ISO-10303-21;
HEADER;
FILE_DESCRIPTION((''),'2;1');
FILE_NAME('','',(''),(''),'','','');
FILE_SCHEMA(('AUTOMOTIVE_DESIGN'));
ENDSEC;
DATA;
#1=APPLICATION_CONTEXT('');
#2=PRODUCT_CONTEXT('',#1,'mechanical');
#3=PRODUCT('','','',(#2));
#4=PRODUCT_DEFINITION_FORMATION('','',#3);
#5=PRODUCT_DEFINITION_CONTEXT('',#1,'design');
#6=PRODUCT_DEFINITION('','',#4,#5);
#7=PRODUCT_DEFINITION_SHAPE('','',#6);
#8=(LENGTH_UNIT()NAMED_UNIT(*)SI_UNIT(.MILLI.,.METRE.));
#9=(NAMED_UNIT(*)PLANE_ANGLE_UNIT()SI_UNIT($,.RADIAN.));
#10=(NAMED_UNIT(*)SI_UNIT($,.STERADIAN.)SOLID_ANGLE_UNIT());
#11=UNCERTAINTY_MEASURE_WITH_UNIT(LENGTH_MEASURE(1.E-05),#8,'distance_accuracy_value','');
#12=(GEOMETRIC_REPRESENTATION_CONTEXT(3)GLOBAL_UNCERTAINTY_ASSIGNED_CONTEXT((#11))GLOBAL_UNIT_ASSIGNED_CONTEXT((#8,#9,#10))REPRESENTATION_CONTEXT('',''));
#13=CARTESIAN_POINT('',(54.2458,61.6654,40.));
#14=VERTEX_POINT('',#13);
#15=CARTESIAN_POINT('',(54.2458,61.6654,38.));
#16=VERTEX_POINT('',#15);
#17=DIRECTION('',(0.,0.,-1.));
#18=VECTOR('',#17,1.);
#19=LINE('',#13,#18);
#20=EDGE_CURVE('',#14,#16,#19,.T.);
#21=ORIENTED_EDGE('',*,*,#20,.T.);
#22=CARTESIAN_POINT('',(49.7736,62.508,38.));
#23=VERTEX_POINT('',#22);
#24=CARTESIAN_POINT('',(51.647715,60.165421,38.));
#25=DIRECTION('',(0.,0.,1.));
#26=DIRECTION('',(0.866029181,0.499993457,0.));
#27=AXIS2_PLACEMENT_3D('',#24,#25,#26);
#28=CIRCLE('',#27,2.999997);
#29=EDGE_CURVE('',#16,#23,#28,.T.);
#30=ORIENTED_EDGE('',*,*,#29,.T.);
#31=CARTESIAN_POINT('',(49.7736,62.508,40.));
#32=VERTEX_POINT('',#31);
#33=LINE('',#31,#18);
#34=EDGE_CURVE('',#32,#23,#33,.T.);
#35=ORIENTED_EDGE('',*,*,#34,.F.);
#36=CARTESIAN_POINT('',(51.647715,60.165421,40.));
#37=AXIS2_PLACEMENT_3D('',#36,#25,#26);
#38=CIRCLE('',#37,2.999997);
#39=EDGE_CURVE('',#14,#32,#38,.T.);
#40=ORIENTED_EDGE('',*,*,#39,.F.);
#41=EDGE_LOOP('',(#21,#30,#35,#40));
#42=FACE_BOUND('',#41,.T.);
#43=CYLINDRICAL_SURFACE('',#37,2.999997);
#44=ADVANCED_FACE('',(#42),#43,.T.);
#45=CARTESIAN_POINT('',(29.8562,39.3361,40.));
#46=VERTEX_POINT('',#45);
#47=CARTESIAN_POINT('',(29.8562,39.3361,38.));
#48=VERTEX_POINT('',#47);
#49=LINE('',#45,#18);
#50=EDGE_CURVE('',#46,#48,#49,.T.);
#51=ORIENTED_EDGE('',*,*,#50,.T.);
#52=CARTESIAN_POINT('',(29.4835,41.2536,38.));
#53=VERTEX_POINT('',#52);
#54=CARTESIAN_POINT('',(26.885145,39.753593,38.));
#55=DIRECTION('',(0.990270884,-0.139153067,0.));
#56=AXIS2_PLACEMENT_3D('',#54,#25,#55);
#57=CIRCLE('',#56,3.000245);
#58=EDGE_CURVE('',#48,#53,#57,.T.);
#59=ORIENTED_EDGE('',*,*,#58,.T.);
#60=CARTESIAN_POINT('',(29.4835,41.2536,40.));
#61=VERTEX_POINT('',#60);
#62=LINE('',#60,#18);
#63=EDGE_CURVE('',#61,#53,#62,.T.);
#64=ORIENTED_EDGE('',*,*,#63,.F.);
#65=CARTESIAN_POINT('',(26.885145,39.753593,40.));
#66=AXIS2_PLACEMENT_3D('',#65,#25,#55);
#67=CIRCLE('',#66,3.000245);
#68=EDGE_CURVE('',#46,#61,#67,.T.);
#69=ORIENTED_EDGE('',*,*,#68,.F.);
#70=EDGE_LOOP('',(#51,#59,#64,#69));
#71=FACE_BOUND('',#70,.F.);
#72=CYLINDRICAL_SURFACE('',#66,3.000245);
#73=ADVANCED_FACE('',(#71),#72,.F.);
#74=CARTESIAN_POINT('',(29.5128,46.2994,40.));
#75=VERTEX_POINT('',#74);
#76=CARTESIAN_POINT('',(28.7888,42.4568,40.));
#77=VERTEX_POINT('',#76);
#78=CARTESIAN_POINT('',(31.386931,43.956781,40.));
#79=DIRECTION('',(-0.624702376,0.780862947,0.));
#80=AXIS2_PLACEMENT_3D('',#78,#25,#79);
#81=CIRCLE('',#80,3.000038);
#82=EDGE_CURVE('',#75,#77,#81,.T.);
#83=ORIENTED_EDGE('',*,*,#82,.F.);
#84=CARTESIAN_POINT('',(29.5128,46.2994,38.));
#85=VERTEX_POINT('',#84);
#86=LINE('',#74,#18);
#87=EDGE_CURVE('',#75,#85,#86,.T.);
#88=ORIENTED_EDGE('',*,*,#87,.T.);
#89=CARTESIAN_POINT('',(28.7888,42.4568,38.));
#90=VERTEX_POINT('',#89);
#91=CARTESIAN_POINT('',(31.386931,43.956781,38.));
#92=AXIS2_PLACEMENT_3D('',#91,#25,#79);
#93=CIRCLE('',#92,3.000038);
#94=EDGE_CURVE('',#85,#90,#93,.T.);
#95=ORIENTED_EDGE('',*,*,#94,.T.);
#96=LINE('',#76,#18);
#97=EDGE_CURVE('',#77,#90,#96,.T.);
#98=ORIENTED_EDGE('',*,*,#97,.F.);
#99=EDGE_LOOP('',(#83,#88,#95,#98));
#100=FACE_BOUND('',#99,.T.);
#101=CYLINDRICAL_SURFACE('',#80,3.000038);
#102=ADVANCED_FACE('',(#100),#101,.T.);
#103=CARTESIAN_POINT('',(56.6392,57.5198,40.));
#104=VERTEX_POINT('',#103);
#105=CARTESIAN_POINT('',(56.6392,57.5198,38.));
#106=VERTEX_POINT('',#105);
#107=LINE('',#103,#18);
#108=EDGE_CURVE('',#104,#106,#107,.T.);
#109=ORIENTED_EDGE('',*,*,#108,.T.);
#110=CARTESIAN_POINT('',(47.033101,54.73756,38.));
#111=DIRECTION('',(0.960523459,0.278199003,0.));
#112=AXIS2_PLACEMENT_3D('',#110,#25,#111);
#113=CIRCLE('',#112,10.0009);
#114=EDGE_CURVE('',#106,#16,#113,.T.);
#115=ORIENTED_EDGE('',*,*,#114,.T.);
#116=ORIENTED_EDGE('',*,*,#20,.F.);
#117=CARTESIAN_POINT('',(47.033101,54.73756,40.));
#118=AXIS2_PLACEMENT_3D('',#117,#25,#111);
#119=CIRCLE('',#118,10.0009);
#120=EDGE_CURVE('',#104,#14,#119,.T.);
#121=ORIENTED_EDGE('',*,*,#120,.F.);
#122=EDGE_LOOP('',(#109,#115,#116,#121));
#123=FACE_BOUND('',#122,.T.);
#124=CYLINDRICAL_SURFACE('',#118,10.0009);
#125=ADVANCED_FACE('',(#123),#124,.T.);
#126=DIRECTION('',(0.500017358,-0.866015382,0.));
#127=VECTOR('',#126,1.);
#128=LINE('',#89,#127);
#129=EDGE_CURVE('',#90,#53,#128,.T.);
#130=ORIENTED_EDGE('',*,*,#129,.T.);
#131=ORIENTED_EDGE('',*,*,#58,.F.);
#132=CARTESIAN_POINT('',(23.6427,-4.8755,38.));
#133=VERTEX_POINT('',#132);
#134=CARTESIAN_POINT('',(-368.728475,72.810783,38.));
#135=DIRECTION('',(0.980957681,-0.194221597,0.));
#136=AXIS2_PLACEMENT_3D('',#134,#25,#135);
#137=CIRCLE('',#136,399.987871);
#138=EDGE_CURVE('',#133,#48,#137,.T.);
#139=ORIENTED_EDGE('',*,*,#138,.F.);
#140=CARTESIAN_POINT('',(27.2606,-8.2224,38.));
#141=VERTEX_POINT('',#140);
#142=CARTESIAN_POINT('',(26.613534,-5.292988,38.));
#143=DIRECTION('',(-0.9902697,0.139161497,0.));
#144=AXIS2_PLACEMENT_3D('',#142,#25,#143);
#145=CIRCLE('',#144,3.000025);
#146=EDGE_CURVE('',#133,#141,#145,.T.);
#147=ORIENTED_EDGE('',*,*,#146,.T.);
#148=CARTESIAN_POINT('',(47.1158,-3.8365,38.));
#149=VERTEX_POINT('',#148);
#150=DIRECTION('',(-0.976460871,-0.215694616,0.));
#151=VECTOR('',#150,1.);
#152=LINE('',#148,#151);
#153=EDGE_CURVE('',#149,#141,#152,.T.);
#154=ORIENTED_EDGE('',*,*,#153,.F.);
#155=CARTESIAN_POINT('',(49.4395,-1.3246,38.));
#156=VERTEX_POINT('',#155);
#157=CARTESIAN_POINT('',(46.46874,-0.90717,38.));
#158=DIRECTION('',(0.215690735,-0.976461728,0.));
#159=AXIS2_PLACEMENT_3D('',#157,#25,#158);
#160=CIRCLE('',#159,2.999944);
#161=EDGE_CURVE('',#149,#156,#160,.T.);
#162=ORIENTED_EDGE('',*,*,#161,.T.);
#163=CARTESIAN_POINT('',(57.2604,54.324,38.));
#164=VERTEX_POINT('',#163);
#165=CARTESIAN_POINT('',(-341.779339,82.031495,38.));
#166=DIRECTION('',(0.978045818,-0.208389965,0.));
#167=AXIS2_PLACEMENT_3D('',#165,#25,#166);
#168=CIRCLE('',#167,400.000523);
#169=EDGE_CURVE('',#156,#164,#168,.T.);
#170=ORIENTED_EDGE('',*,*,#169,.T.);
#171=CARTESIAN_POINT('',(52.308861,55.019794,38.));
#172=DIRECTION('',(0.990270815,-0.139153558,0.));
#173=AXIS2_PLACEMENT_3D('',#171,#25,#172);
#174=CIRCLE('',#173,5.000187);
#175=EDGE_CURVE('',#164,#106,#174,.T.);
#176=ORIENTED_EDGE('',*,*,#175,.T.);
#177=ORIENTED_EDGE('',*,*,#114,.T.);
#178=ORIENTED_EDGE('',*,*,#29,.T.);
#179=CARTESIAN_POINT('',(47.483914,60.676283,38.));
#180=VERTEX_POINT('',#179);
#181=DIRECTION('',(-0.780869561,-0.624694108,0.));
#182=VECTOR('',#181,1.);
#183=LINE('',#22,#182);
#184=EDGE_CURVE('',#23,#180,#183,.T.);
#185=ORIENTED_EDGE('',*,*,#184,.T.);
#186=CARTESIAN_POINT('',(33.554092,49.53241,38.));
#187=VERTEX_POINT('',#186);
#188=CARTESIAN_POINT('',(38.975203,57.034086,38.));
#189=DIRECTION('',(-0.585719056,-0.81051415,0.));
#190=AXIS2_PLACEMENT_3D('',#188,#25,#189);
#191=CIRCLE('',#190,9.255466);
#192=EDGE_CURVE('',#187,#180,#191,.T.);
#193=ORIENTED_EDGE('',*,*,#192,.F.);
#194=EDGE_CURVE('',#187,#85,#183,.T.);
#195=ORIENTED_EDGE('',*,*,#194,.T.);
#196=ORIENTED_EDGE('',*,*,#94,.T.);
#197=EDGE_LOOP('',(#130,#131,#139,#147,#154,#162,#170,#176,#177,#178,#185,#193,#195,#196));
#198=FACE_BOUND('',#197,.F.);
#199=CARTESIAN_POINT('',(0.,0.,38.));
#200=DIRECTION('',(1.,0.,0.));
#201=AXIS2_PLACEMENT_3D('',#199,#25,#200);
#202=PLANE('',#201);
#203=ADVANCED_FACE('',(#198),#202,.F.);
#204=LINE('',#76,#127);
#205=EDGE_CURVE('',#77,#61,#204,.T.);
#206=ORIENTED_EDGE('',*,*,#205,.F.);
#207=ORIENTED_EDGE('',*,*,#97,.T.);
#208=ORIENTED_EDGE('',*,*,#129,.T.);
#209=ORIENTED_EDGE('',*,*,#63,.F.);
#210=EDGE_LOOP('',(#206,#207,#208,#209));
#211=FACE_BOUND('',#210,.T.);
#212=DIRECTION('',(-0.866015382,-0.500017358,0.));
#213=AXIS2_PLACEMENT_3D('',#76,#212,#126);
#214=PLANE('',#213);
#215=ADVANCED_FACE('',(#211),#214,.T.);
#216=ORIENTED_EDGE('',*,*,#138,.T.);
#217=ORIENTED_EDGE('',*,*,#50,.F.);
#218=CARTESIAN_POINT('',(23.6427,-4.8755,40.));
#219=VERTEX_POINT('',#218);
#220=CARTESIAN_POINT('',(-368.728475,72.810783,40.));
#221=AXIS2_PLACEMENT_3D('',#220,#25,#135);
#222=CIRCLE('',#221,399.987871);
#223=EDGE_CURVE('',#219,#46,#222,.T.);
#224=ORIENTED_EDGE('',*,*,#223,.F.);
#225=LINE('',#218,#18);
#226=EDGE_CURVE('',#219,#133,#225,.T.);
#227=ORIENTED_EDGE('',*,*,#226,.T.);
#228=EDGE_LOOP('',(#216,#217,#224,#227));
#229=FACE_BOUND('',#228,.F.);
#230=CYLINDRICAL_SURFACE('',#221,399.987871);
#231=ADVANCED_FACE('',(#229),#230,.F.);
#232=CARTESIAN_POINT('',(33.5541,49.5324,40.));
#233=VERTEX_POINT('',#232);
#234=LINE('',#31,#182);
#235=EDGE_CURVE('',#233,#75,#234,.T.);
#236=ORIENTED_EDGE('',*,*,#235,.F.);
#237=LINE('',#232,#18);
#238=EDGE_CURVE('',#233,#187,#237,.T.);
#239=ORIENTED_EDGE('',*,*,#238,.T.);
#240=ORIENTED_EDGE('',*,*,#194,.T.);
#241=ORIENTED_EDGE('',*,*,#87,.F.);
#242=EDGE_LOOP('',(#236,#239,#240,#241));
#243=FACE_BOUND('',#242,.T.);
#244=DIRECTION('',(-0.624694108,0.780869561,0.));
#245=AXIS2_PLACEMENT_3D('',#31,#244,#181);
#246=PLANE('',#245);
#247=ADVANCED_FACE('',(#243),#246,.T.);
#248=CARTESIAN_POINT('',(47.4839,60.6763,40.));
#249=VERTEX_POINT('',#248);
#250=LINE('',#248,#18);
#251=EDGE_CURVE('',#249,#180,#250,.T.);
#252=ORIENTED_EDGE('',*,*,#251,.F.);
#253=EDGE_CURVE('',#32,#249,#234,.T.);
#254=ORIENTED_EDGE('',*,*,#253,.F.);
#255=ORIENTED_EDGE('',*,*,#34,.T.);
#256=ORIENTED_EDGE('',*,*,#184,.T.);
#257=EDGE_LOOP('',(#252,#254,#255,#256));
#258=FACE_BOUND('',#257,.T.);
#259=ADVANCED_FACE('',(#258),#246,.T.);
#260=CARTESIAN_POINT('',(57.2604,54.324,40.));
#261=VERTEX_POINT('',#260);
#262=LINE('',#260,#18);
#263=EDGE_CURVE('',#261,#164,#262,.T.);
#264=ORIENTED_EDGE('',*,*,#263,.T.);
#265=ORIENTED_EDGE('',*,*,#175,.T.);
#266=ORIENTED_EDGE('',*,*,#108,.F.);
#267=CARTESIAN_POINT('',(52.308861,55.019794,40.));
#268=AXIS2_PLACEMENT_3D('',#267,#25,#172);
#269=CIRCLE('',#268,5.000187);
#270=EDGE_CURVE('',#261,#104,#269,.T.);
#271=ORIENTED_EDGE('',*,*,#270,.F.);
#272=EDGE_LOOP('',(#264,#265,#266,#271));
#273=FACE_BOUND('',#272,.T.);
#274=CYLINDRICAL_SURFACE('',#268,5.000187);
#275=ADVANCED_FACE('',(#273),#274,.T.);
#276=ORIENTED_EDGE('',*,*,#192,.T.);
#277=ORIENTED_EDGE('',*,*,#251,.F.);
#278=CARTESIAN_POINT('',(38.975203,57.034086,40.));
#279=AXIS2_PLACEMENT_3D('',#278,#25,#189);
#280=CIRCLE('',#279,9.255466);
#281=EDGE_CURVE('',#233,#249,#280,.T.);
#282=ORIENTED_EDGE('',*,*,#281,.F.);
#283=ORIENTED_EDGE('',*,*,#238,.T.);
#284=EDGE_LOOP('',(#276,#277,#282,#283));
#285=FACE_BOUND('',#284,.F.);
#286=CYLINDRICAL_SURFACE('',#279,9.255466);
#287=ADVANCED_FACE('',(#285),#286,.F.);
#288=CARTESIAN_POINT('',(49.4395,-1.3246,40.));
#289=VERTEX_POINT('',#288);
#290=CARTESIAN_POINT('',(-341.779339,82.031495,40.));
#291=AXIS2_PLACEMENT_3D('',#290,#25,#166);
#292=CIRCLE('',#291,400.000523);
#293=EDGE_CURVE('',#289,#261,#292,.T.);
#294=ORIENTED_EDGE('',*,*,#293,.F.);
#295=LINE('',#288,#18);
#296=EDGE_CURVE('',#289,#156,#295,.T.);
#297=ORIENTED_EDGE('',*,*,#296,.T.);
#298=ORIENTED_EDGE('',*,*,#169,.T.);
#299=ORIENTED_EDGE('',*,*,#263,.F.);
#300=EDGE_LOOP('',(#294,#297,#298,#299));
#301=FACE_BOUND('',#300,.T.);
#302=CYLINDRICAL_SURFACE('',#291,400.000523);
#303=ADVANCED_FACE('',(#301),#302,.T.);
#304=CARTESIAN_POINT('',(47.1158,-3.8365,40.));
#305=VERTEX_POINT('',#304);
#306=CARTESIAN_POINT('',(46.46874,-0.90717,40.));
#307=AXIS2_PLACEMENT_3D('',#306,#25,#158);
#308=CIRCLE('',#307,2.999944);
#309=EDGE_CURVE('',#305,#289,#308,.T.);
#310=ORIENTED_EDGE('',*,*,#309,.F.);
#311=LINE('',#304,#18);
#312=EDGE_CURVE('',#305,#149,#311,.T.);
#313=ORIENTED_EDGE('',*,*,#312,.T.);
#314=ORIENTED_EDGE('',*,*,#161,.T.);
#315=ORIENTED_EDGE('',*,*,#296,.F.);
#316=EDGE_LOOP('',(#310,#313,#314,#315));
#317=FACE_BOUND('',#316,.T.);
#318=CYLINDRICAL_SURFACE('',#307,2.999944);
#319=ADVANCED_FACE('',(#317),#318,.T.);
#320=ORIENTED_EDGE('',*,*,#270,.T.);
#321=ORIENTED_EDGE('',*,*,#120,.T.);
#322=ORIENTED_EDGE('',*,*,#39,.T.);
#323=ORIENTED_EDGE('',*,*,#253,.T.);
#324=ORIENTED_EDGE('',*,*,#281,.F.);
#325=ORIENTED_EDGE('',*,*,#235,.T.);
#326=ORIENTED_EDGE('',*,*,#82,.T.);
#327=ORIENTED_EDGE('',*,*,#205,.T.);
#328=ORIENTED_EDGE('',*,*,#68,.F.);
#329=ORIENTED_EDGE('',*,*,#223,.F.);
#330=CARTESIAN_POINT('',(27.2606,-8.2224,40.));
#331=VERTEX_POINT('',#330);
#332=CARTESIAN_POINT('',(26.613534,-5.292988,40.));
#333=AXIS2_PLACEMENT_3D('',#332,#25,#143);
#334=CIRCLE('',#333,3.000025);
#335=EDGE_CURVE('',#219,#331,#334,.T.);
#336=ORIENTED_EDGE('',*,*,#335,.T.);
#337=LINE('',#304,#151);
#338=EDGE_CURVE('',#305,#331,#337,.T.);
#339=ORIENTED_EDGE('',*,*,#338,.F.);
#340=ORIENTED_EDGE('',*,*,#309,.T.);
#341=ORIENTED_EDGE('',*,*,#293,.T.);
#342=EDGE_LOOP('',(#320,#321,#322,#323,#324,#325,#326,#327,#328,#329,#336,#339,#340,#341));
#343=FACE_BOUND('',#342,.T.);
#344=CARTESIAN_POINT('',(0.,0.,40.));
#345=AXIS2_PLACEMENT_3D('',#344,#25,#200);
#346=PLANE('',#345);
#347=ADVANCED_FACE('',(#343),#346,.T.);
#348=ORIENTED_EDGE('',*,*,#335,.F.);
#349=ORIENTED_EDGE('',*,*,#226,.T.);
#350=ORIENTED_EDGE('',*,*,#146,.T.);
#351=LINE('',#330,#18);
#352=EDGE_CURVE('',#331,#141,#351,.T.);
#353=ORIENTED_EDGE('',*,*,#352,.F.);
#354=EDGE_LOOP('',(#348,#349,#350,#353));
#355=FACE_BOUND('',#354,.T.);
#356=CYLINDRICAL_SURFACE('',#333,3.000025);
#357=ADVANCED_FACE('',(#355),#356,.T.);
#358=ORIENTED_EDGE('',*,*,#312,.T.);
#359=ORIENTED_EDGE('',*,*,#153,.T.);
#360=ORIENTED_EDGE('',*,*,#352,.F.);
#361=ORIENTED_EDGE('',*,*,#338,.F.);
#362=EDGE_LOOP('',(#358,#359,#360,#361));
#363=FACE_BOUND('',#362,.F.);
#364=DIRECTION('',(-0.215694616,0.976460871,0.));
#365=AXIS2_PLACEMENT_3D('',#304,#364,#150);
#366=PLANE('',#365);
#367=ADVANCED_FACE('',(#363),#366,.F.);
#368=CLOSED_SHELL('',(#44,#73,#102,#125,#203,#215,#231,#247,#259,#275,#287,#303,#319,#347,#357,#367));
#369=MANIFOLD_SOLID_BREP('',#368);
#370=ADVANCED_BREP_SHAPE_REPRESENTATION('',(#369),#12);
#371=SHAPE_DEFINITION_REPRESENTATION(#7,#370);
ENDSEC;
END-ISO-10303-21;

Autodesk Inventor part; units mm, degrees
ref_plane "YZ Plane" through (0, 0, 0) normal (1, 0, 0) x (0, 1, 0)
ref_plane "Plano de trabajo14" through (0, 0, 40) normal (0, 0, 1) x (1, 0, 0)
sketch "Boceto6" plane through (0, 0, 40) normal (0, 0, 1) x (1, 0, 0)
  line L0 (49.7736, 62.508) -> (29.5128, 46.2994)
  line L1 (28.7888, 42.4568) -> (29.4835, 41.2536)
  line L2 (47.1158, -3.8365) -> (27.2606, -8.2224)
  arc A0 (29.5128, 46.2994) -> (28.7888, 42.4568) centre (31.3869, 43.9568) ccw
  arc A1 (29.8562, 39.3361) -> (29.4835, 41.2536) centre (26.8854, 39.7536) ccw
  arc A2 (54.2458, 61.6654) -> (49.7736, 62.508) centre (51.6477, 60.1654) ccw
  arc A3 (23.6427, -4.8755) -> (27.2606, -8.2224) centre (26.6135, -5.293) ccw
  arc A4 (47.1158, -3.8365) -> (49.4395, -1.3246) centre (46.4687, -0.9071) ccw
  arc A5 (57.2604, 54.324) -> (56.6392, 57.5198) centre (52.3091, 55.0198) ccw
  arc A6 (56.6392, 57.5198) -> (54.2458, 61.6654) centre (47.0339, 54.7379) ccw
  arc A7 (49.4395, -1.3246) -> (57.2604, 54.324) centre (-341.7788, 82.0314) ccw
  arc A8 (23.6427, -4.8755) -> (29.8562, 39.3361) centre (-368.7404, 72.8128) ccw
  line L3 (51.5494, 60.0868) -> (31.3869, 43.9568)
  line L4 (31.3869, 43.9568) -> (32.0816, 42.7536)
  arc A9 (32.8399, 39.0157) -> (32.0816, 42.7536) centre (26.8854, 39.7536) ccw
  arc A10 (26.6185, -5.2919) -> (32.8399, 39.0157) centre (-368.7404, 72.8128) ccw
  line L5 (26.6185, -5.2919) -> (46.4607, -0.9089)
  arc A11 (46.4607, -0.9089) -> (54.2765, 54.6606) centre (-341.7788, 82.0314) ccw
  arc A12 (54.2765, 54.6606) -> (53.8619, 56.2803) centre (52.3091, 55.0198) ccw
  arc A13 (53.8619, 56.2803) -> (51.5494, 60.0868) centre (47.0339, 54.7379) ccw
  dimension "d106" = 3
extrude "Extrusión11" add sketch "Boceto6" against normal blind 2 contours A2 A6 A5 A7 A4 L2 A3 A8 A1 L1 A0 L0 | A13 A12 A11 L5 A10 A9 L4 L3
ref_plane "Plano de trabajo15" through (0, 0, 40) normal (0, 0, -1) x (-1, 0, 0)
sketch "Boceto34" plane through (0, 0, 40) normal (0, 0, 1) x (1, 0, 0)
  line L0 (47.4839, 60.6763) -> (33.5541, 49.5324)
  line L1 (39.6432, 54.4037) -> (42.1142, 54.4037) construction
  line L2 (39.6432, 54.4037) -> (42.3572, 54.4037) construction
  arc A0 (33.5541, 49.5324) -> (47.4839, 60.6763) centre (38.9752, 57.0342) ccw
  point P0 (0, 0)
  dimension "d154" = 18.511
extrude "Extrusión26" cut sketch "Boceto34" against normal blind 10
equation "\"Radio_pliegue\" = Grosor"
equation "\"Anchura_desahogo_plegado\" = Grosor"
equation "\"Profundidad_desahogo_plegado\" = 0.5 * Grosor"
equation "\"Tamaño_destalonado\" = 4 * Grosor"
equation "\"Remanente_mínimo\" = 2 * Grosor"
equation "\"Radiodetransición\" = Radio_pliegue"
equation "\"Tamaño_de_radio_de_Jacobi\" = Radio_pliegue"
equation "\"TamañoSeparación\" = Grosor"
equation "\"Grosor\" = 0.5"
properties part number "brazocuadrado"
